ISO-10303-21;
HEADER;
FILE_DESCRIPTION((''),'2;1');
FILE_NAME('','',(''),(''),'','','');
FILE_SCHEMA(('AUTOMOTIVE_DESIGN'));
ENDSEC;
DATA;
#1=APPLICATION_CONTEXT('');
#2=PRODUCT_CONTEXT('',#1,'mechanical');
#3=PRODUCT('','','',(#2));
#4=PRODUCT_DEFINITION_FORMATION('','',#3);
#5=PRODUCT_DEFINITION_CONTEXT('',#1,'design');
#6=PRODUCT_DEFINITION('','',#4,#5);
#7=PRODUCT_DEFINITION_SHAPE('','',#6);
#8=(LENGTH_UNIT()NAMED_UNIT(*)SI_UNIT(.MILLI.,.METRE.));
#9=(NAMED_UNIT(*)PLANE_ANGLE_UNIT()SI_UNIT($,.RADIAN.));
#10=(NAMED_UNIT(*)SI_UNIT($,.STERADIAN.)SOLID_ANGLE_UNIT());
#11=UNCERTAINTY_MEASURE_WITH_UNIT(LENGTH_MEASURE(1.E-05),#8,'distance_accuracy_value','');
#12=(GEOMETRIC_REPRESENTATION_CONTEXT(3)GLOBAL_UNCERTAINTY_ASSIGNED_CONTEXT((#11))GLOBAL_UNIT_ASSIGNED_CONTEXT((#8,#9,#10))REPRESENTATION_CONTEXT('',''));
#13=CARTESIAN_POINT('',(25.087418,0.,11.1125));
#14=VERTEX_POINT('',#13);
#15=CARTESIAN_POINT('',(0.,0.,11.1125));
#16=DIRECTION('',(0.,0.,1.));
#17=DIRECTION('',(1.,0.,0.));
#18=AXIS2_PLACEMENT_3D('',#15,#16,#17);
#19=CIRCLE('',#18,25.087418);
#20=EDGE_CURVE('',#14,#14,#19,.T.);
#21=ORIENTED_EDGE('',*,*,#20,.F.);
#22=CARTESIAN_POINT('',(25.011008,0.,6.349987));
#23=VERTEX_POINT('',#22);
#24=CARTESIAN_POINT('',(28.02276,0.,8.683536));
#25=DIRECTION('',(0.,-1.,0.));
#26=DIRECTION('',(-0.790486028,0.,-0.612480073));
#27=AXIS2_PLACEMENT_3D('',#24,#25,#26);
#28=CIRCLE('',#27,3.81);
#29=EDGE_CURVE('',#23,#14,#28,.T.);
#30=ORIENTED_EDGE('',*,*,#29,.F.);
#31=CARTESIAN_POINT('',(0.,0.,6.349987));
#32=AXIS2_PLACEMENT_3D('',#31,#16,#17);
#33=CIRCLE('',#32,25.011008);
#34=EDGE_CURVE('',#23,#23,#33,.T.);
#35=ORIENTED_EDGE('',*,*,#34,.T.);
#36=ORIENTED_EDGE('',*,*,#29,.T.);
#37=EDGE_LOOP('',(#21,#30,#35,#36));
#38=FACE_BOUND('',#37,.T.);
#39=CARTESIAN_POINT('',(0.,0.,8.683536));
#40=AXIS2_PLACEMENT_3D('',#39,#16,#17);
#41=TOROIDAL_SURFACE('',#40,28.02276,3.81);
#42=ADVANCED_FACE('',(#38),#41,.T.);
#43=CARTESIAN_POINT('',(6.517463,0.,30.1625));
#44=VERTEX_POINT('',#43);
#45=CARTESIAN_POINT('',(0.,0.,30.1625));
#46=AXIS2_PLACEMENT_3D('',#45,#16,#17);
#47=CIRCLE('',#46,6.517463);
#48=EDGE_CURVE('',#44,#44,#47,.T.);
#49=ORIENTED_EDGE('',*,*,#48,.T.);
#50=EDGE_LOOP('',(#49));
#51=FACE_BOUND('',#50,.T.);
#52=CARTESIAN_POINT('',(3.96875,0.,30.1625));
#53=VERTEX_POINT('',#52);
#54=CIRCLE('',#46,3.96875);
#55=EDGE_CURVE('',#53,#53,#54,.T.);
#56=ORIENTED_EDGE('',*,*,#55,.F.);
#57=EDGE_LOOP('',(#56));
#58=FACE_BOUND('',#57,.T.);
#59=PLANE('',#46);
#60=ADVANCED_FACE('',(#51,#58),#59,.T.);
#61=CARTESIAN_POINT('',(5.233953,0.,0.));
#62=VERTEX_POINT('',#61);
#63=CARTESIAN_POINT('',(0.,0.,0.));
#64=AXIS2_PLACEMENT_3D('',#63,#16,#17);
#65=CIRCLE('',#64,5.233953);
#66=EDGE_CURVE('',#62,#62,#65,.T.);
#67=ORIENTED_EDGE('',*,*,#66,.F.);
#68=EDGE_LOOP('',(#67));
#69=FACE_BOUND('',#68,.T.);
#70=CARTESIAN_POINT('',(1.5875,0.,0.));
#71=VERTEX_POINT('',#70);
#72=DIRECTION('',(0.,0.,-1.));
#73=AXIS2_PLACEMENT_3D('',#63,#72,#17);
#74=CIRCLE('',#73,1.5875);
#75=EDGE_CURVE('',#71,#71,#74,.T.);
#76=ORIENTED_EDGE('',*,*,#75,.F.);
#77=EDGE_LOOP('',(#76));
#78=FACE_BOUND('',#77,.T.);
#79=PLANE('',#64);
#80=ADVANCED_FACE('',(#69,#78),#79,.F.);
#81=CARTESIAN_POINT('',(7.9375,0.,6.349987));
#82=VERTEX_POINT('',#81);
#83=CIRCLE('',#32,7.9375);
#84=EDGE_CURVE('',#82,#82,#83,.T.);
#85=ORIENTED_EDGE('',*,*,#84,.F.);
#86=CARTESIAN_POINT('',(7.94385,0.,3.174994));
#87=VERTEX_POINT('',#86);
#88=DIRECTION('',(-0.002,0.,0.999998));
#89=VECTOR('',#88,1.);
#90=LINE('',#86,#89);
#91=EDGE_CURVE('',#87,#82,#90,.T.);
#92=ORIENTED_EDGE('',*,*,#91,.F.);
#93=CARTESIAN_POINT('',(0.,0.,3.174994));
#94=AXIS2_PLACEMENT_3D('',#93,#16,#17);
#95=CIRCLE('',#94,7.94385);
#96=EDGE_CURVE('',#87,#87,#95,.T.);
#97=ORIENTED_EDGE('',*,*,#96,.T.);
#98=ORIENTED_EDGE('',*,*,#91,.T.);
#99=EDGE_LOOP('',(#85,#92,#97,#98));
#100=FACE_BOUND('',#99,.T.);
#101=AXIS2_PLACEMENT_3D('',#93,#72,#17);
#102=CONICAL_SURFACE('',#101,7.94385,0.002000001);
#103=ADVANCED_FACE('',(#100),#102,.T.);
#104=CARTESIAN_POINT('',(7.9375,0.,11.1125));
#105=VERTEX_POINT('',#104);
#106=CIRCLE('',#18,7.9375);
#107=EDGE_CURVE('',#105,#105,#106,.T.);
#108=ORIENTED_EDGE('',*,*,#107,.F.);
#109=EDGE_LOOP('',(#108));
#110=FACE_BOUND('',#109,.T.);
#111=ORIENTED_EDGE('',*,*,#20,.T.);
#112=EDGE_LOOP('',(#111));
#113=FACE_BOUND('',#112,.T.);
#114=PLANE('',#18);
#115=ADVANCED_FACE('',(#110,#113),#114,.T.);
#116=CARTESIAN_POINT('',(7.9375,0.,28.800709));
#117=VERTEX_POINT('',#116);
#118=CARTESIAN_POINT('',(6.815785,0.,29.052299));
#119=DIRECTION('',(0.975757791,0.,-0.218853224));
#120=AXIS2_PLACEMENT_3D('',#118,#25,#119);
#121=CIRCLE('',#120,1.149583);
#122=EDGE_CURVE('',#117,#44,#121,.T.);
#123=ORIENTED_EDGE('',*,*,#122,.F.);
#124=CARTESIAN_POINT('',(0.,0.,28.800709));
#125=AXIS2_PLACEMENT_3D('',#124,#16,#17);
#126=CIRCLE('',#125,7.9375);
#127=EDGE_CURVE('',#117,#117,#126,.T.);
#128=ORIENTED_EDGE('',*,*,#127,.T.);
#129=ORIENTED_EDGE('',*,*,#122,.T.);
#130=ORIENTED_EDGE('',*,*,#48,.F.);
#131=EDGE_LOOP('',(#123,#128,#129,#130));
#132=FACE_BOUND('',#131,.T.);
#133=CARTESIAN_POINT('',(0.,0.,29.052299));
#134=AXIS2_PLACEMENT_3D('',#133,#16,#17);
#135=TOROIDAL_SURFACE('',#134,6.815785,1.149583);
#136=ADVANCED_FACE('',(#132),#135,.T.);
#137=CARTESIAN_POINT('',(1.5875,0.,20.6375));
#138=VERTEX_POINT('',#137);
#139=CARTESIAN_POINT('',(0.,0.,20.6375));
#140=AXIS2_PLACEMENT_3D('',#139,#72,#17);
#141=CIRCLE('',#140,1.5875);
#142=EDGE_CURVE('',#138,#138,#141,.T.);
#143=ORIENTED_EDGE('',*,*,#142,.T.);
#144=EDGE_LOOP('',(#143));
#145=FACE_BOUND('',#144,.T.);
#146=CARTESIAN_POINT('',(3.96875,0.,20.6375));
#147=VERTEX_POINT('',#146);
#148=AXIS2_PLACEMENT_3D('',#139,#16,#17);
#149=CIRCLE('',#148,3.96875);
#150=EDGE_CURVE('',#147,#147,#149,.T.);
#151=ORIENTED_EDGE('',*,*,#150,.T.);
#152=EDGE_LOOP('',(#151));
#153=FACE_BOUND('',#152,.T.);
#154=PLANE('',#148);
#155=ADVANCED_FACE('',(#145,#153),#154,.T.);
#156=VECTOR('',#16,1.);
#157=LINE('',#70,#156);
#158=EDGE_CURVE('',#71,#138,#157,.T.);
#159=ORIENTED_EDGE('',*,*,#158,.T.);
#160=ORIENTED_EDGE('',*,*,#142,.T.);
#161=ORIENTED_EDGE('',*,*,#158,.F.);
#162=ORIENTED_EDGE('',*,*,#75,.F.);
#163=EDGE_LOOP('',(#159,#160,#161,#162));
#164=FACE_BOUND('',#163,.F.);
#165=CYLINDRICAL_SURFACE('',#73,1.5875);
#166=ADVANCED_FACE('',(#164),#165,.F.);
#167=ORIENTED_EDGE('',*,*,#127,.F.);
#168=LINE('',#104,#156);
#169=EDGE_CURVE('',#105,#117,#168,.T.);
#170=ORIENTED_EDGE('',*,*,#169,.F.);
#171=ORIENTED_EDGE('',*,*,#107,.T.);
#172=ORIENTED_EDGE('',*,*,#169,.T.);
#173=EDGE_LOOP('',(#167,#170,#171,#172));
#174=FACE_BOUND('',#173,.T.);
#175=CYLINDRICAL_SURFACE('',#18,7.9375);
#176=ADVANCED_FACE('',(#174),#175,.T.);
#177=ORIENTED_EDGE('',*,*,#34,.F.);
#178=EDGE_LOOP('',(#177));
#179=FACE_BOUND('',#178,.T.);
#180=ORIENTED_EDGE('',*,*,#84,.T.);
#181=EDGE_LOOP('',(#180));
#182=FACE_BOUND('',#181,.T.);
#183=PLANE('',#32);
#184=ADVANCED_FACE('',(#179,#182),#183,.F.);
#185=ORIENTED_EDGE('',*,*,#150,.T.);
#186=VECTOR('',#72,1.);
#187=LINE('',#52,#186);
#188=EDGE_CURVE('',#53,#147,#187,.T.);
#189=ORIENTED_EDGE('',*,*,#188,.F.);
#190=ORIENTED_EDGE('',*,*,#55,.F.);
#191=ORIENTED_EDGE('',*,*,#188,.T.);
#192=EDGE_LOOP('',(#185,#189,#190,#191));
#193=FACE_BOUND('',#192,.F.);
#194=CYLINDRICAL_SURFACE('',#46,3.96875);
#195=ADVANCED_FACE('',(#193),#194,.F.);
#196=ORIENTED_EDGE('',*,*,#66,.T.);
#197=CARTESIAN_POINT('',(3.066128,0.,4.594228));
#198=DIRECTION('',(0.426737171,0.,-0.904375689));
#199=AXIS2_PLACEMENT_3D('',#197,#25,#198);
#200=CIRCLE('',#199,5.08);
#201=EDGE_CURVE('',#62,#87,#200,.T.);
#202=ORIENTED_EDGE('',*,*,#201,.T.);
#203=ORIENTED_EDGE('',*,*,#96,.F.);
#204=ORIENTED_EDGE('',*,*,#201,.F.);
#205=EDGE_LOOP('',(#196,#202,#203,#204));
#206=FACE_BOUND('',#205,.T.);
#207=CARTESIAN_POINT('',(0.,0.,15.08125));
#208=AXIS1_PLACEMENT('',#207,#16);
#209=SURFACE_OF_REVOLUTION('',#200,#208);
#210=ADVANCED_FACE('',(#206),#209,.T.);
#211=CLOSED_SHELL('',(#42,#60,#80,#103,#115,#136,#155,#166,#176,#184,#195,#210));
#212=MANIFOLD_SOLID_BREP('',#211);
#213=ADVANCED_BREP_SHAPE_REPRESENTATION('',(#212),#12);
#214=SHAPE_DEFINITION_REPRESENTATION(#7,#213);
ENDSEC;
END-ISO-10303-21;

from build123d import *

# Parameters (mm, degrees)
F2_R     = 3.96875
F3_DEPTH = 9.525
F4_R     = 1.5875
F5_DEPTH = 20.6375


# Not quite as in the source:
# - a length typed as a fraction of an inch, garbled in the dataset ("3 / 203.2 mm" for 3/8 in), is restored


with BuildPart() as f1:
    # F0 (on Front) → F1 (revolve)
    with BuildSketch(Plane.XZ):
        with BuildLine():
            Line((0, 30.1625), (0, 0))
            Line((0, 0), (5.2339527756, 0))
            ThreePointArc((5.2339527756, 0), (6.9300739719, 1.2963017107), (7.94385, 3.17499365))
            Line((7.94385, 3.17499365), (7.9375, 6.3499873))
            Line((7.9375, 6.3499873), (25.0110084837, 6.3499873))
            ThreePointArc((25.0110084837, 6.3499873), (31.8322699863, 8.6224170081), (25.0874177301, 11.1125))
            Line((25.0874177301, 11.1125), (7.9375, 11.1125))
            Line((7.9375, 11.1125), (7.9375, 28.8007091731))
            ThreePointArc((7.9375, 28.8007091731), (7.6114687199, 29.8820156927), (6.517462898, 30.1625))
            Line((6.517462898, 30.1625), (0, 30.1625))
        make_face()
    revolve(axis=Axis((0, 0, 15.08125), (0, 0, 1)))

    # F2 (on face) → F3 (cut)
    with BuildSketch(Plane.XY.offset(30.1625)):
        Circle(F2_R)
    extrude(amount=-F3_DEPTH, mode=Mode.SUBTRACT)

    # F4 (on face) → F5 (cut)
    with BuildSketch(Plane(origin=(0, 0, 0), x_dir=(1, 0, 0), z_dir=(0, 0, -1))):
        Circle(F4_R)
    extrude(amount=-F5_DEPTH, mode=Mode.SUBTRACT)


solid = f1.part
